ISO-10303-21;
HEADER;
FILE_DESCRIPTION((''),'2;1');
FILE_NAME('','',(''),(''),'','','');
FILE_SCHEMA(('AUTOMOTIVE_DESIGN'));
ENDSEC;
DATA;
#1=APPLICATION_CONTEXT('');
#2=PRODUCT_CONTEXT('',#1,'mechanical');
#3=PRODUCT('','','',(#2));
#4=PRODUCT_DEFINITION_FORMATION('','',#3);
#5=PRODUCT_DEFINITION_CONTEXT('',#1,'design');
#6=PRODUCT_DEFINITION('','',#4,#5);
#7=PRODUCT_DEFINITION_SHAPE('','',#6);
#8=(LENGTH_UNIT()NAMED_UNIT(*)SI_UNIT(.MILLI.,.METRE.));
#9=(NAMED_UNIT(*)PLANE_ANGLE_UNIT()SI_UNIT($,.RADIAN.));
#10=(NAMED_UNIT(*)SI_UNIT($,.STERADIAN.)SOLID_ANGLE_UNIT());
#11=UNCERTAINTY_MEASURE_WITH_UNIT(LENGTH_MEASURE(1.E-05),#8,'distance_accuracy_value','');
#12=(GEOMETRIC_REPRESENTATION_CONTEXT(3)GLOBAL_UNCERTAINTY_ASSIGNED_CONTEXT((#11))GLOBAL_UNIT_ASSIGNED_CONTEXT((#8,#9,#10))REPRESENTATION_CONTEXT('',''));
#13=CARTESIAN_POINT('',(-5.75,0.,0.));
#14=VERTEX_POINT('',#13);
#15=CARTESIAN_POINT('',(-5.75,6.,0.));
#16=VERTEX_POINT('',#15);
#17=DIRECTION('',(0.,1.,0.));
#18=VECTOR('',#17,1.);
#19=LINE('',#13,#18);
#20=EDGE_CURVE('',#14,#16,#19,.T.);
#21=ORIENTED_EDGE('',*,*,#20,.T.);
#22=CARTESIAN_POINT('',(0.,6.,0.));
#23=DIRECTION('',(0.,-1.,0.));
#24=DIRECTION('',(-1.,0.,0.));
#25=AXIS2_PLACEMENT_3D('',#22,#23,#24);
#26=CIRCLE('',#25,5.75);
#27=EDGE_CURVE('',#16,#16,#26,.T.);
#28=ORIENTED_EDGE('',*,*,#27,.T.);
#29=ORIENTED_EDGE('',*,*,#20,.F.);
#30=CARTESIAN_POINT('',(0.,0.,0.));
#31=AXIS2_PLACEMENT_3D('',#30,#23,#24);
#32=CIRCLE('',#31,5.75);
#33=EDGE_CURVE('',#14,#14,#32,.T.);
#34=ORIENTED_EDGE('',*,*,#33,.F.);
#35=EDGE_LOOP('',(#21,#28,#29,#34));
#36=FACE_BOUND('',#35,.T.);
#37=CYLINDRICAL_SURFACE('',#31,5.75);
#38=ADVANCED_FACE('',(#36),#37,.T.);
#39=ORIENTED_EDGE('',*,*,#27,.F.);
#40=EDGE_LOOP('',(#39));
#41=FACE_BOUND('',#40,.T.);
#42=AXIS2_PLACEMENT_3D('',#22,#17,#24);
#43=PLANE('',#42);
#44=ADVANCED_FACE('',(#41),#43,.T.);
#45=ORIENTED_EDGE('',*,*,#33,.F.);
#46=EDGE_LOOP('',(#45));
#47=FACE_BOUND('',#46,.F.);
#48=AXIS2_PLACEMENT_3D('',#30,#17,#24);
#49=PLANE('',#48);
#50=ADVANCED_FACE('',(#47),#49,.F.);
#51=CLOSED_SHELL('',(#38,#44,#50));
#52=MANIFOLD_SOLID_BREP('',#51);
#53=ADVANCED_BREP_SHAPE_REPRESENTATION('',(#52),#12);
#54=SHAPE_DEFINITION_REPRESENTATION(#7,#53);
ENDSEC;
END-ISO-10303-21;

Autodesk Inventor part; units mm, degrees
ref_plane "YZ Plane" through (0, 0, 0) normal (1, 0, 0) x (0, 1, 0)
ref_plane "XZ Plane" through (0, 0, 0) normal (0, 1, 0) x (-1, 0, 0)
ref_plane "XY Plane" through (0, 0, 0) normal (0, 0, 1) x (1, 0, 0)
sketch "스케치1" plane through (0, 0, 0) normal (0, 1, 0) x (-1, 0, 0)
  circle A0 centre (0, 0) radius 5.75
  dimension "d0" = 11.5
extrude "돌출1" add sketch "스케치1" along normal blind 1
move faces "이동1" translate (0, 5, 0) faces at (-0.1148, 1, 1.5963)
properties part number "큰베어링 정렬_3D 인쇄"
